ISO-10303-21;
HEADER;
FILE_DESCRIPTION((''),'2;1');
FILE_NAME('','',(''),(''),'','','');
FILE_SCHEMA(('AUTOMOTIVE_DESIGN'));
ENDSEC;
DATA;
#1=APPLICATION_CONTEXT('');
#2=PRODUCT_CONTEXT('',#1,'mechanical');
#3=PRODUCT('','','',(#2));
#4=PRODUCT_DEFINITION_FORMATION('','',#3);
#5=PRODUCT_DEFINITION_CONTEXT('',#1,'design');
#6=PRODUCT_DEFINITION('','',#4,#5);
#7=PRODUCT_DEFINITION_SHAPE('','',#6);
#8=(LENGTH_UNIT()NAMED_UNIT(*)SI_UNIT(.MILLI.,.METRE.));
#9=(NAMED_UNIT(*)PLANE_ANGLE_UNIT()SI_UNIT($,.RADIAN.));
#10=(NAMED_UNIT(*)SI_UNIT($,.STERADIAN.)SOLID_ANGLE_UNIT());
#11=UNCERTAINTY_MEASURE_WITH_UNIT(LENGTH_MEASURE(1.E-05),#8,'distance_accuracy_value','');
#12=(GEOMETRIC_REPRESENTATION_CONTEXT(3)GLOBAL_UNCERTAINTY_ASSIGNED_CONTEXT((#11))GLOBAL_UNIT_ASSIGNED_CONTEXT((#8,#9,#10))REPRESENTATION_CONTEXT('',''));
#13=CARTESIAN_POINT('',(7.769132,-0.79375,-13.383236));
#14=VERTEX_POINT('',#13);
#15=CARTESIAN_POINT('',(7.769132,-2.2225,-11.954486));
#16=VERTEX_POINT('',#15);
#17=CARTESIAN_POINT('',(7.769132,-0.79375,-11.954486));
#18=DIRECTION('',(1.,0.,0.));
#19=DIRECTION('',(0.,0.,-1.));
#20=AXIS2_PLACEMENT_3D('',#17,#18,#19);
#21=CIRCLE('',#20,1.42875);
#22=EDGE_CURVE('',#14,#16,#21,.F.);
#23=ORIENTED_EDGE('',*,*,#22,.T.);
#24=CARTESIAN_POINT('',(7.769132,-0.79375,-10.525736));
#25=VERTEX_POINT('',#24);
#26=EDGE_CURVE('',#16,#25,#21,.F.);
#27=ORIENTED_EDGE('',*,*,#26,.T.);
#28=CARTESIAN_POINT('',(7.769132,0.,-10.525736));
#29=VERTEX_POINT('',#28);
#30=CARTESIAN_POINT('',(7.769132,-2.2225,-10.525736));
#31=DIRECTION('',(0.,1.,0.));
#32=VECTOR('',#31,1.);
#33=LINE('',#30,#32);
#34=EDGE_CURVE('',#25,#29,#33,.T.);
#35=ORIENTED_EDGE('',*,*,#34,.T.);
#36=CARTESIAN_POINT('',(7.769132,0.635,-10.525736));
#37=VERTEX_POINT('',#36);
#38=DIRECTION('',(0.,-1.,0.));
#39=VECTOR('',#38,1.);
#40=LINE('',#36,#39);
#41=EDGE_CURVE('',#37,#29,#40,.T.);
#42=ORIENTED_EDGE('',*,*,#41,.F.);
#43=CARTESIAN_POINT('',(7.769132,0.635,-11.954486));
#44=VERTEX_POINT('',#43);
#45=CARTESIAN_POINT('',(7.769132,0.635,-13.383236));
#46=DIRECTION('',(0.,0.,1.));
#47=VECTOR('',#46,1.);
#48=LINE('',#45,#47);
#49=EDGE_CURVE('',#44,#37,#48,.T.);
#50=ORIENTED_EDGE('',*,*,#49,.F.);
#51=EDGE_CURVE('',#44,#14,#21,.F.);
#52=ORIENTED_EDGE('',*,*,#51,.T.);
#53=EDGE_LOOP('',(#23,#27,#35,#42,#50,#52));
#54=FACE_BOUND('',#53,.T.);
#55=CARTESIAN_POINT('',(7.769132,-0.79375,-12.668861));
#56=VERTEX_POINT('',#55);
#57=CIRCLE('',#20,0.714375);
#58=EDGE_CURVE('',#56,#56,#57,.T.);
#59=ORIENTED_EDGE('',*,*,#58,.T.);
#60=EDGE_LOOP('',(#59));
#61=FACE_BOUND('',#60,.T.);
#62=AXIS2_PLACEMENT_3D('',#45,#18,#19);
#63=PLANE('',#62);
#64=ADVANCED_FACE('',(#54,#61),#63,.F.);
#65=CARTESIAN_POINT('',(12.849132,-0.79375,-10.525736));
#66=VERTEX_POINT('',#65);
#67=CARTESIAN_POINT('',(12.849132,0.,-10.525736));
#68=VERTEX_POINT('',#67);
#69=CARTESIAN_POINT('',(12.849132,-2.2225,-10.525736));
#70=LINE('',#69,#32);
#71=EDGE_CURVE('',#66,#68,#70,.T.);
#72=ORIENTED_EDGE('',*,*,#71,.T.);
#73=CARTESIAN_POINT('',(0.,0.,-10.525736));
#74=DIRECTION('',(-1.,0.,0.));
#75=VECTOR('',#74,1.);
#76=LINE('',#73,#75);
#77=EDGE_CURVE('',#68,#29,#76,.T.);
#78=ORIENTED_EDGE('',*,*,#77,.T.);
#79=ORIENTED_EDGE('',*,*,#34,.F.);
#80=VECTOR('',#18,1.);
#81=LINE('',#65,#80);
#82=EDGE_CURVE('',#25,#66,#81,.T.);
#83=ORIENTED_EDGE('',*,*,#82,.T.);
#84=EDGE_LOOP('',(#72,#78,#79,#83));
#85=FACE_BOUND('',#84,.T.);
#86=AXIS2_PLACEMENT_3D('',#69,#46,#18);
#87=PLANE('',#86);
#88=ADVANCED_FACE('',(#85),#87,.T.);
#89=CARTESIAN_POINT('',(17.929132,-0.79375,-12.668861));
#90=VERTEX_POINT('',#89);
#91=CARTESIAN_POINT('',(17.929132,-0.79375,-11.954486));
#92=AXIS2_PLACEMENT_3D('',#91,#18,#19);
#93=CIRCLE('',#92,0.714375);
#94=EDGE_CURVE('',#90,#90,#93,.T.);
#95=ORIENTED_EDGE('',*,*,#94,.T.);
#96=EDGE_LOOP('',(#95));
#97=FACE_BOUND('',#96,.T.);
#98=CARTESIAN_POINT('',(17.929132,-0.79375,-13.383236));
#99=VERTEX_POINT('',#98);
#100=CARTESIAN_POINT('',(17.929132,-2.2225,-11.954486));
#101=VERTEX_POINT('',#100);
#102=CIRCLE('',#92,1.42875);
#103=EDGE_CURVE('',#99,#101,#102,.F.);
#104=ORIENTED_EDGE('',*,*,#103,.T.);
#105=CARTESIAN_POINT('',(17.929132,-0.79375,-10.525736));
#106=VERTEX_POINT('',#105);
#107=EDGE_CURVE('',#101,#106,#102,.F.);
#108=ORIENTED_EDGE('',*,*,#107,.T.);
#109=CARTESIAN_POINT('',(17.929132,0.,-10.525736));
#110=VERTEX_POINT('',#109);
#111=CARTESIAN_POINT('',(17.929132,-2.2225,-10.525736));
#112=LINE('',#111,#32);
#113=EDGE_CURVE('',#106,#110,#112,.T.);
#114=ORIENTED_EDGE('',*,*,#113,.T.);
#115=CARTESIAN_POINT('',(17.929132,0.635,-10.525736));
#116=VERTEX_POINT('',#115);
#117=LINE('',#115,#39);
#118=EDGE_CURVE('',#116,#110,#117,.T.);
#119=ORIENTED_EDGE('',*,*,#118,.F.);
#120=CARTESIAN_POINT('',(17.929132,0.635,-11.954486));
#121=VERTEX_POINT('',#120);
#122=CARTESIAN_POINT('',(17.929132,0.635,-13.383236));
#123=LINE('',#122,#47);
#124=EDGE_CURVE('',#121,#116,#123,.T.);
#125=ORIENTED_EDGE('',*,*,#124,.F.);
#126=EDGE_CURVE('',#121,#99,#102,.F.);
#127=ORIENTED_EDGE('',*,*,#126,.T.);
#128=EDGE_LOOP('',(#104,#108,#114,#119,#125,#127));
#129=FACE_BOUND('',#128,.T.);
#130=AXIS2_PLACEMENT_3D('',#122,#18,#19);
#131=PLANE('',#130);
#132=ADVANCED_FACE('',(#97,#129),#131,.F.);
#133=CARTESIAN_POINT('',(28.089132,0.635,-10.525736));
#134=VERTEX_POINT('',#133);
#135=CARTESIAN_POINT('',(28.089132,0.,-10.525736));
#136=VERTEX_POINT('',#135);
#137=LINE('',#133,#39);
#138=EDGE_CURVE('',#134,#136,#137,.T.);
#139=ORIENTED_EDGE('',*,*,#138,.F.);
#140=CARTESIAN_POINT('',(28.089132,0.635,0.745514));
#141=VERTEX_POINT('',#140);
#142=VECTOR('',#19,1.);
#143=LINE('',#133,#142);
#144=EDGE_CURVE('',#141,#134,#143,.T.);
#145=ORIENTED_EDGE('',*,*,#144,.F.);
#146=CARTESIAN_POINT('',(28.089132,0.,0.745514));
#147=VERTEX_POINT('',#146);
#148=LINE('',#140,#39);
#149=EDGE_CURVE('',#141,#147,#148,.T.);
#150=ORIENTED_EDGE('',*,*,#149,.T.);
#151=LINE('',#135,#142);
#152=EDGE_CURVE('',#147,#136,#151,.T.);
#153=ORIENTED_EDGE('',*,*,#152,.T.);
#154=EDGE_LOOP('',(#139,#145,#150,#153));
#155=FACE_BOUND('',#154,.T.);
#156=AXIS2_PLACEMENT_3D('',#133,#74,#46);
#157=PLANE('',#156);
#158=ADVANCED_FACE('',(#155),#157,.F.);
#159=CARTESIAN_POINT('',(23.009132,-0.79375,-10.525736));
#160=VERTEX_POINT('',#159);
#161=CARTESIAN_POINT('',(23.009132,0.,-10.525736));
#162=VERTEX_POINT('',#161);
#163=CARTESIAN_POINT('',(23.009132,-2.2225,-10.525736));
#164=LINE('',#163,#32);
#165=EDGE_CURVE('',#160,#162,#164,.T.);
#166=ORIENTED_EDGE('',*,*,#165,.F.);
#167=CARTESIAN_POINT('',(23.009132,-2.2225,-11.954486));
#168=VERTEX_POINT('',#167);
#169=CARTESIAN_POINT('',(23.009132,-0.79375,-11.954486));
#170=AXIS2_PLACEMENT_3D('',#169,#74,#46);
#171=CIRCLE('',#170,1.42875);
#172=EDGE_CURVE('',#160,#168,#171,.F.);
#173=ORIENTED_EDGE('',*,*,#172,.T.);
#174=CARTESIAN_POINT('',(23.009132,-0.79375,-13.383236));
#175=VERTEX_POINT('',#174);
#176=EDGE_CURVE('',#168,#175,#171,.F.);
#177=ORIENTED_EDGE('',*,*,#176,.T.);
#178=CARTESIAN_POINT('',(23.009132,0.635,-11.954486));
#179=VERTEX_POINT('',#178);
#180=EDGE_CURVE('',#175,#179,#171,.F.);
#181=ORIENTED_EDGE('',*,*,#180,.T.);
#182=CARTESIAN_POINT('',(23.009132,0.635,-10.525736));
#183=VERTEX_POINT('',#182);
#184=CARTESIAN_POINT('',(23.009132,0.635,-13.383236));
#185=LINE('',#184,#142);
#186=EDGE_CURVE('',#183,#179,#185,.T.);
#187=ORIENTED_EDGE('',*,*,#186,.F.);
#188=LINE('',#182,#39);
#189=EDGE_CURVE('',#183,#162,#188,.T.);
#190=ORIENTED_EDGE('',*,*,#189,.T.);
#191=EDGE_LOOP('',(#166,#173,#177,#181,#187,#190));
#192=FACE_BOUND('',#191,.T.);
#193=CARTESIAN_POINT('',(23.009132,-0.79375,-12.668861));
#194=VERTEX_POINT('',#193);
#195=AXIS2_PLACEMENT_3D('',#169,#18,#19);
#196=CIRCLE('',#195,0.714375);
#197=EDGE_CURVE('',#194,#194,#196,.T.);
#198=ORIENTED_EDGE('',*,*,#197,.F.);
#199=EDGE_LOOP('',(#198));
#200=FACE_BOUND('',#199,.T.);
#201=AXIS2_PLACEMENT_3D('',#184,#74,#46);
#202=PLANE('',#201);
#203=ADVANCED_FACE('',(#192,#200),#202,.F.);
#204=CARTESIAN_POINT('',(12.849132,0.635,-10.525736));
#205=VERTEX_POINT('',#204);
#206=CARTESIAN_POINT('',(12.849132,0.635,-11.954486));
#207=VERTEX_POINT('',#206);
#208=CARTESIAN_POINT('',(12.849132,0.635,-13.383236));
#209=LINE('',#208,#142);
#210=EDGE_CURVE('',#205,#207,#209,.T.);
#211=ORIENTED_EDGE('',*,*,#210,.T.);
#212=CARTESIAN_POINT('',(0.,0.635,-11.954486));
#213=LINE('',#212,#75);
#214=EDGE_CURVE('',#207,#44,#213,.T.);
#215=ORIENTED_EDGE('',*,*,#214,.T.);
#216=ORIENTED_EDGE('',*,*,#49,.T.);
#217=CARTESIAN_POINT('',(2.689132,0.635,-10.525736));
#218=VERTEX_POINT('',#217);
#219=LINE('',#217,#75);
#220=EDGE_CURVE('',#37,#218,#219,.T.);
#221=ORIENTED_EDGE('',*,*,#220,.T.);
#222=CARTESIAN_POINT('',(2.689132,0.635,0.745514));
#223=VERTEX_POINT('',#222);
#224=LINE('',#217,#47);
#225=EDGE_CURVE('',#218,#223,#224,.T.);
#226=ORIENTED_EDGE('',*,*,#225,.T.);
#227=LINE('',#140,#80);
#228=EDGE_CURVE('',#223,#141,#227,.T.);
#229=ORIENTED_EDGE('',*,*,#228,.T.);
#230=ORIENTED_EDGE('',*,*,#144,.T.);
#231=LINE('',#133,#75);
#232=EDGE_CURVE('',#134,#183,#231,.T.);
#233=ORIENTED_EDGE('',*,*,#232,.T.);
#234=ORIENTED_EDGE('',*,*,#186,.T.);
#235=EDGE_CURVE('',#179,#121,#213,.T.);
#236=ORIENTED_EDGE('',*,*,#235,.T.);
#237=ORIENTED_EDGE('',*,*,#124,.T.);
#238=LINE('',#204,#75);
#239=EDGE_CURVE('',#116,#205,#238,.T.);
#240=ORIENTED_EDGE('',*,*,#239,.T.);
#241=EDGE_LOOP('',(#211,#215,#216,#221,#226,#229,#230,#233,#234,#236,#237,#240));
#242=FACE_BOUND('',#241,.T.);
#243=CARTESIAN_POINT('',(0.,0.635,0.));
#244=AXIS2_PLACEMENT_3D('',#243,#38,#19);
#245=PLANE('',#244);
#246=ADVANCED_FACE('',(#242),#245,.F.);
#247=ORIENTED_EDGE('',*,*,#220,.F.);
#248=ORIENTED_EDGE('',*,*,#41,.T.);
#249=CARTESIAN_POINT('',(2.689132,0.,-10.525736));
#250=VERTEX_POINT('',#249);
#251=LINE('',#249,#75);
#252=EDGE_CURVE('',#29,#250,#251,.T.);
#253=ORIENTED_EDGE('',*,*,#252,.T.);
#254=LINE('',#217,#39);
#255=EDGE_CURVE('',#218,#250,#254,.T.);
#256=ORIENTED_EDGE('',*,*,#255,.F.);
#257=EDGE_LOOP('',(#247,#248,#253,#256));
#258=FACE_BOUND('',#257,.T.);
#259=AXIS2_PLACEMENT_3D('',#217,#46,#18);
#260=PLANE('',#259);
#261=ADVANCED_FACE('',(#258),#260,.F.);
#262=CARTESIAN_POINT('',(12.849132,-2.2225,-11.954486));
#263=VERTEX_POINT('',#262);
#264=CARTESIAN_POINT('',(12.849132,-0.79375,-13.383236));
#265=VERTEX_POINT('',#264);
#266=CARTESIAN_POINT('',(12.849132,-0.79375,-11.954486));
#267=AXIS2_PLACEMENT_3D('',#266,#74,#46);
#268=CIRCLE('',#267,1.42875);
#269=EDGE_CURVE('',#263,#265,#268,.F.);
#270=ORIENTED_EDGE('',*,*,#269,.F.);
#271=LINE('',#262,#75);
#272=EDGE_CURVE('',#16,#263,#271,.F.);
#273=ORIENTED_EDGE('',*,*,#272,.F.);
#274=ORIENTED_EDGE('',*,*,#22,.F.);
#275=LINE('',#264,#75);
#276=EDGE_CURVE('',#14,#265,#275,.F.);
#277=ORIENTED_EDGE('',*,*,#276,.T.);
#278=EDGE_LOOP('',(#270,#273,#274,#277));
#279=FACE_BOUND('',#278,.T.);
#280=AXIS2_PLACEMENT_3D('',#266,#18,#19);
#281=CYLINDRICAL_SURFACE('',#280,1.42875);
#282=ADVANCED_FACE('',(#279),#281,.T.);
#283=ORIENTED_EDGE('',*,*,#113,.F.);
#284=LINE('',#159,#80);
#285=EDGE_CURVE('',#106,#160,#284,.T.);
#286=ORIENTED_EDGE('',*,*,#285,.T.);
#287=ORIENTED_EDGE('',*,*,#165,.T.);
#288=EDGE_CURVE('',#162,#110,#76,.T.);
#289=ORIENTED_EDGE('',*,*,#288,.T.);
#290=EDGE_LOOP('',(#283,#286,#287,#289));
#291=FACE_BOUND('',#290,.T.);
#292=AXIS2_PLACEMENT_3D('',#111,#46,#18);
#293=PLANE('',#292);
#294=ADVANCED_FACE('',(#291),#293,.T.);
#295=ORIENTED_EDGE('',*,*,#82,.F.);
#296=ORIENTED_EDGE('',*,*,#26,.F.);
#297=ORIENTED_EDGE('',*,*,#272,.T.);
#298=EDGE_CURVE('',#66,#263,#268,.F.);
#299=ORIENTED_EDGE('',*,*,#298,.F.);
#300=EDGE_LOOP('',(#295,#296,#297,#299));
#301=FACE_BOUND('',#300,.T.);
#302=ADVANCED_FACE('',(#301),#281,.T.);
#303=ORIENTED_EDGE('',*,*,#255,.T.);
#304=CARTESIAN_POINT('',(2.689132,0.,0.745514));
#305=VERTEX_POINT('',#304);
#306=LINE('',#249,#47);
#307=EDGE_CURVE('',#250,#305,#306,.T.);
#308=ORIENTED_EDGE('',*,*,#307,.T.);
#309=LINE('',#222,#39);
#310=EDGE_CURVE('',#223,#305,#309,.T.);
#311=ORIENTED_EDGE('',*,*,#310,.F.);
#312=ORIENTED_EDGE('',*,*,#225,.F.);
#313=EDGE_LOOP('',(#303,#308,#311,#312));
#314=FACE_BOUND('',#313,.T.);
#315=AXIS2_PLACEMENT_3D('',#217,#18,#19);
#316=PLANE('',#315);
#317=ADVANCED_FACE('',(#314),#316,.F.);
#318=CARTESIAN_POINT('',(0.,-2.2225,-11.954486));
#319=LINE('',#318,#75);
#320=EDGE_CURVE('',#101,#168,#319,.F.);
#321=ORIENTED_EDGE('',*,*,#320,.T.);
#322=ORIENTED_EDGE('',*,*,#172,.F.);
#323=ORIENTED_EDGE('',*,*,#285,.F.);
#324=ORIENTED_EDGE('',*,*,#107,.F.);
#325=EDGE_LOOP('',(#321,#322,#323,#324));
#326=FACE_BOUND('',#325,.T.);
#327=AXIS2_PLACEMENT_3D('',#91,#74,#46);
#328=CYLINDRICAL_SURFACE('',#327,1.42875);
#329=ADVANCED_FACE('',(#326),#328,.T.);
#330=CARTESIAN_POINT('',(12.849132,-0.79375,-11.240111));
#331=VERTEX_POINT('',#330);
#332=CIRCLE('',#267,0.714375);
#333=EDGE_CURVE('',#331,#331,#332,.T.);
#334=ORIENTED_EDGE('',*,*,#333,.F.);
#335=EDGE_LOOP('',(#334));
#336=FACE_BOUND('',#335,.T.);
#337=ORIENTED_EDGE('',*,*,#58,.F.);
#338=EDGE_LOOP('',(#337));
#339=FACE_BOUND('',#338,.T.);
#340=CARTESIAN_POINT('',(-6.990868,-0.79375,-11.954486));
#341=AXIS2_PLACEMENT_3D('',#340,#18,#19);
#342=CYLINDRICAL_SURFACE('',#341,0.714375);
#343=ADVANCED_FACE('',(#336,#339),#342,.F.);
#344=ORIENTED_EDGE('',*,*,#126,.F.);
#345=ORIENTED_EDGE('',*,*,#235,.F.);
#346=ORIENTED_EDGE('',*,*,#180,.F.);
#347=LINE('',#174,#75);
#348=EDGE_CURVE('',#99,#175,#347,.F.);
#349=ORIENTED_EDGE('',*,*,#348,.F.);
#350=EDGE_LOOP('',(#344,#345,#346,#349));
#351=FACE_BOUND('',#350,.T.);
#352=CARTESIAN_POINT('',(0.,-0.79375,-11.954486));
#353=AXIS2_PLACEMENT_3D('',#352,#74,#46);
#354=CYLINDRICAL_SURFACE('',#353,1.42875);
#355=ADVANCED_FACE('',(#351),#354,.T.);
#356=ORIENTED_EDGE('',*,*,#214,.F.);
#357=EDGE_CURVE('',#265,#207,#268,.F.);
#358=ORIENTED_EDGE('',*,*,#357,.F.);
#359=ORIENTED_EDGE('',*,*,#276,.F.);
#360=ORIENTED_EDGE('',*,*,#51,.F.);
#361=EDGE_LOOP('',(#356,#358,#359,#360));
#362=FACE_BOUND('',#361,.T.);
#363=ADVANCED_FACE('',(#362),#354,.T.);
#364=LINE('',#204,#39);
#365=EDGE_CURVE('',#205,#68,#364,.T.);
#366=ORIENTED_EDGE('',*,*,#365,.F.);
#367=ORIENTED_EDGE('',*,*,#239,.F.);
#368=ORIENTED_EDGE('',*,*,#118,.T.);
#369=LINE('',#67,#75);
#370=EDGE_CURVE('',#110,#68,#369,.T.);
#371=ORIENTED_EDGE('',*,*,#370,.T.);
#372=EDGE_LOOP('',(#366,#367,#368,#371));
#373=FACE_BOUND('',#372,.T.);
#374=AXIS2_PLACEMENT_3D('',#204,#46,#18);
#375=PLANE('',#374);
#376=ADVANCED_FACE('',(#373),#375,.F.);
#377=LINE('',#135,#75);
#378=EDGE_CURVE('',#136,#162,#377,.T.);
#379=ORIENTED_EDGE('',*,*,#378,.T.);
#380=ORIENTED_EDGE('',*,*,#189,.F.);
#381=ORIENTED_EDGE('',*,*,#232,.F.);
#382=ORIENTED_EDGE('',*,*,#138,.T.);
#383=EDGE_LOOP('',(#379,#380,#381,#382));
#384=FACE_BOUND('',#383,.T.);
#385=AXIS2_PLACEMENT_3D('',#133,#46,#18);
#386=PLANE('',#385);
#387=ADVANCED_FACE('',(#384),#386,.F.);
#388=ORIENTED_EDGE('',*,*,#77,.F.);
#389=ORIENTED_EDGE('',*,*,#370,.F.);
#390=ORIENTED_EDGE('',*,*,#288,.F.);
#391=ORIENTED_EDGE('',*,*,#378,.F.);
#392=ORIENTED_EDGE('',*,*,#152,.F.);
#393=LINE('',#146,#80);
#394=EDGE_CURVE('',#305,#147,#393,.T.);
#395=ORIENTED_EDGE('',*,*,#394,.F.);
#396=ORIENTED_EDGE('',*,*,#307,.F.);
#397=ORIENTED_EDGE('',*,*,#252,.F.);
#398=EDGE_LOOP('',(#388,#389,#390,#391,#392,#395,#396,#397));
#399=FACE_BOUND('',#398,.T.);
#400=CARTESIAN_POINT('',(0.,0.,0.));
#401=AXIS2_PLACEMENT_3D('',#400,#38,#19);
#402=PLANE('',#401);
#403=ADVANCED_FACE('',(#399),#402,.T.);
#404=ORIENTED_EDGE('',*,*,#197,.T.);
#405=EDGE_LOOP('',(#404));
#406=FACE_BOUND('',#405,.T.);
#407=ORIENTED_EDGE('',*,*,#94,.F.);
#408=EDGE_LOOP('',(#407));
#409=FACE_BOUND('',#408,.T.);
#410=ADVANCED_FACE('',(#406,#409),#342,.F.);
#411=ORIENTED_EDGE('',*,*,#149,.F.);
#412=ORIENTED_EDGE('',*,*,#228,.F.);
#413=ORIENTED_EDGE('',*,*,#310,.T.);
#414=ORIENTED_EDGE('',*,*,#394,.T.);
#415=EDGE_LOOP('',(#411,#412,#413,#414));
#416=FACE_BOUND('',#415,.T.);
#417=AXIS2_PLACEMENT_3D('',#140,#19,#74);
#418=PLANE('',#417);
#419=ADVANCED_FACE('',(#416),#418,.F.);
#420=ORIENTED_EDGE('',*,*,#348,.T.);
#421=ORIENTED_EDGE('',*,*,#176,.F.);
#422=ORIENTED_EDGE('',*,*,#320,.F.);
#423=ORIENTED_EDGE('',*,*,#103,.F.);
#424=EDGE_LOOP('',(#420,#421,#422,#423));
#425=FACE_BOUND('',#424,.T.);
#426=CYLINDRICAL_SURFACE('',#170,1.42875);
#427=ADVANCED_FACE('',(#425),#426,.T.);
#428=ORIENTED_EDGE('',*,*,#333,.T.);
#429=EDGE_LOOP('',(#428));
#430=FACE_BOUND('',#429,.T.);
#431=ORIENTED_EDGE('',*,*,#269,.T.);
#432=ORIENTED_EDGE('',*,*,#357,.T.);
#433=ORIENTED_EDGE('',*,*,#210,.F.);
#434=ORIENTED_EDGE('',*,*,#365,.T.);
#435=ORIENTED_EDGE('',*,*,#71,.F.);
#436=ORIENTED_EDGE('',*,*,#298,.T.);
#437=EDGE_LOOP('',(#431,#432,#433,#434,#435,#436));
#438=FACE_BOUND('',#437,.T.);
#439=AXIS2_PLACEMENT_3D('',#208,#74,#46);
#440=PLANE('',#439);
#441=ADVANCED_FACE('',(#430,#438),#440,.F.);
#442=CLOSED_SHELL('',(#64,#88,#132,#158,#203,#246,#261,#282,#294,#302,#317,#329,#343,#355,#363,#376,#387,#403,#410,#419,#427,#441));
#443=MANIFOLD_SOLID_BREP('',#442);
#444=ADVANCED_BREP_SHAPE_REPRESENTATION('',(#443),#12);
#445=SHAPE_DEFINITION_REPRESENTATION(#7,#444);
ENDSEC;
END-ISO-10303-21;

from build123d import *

# Parameters (mm, degrees)
BOSS_EXTRUDE1_DEPTH = 0.635
SKETCH2_W           = 5.08
SKETCH2_H           = 2.8575
BOSS_EXTRUDE2_DEPTH = 2.8575
FILLET1_R           = 1.42875
SKETCH3_R           = 0.714375
CUT_EXTRUDE1_DEPTH  = 30


with BuildPart() as part:
    # Sketch1 → Boss-Extrude1 (new body)
    with BuildSketch(Plane(origin=(0, 0, 0), x_dir=(1, 0, 0), z_dir=(0, 1, 0))):
        Polygon((12.849131833, 13.383236071), (7.769131833, 13.383236071), (7.769131833, 10.525736071), (2.689131833, 10.525736071), (2.689131833, -0.745513929), (28.089131833, -0.745513929), (28.089131833, 10.525736071), (23.009131833, 10.525736071), (23.009131833, 13.383236071), (17.929131833, 13.383236071), (17.929131833, 10.525736071), (12.849131833, 10.525736071), align=None)
    extrude(amount=BOSS_EXTRUDE1_DEPTH)

    # Sketch2 → Boss-Extrude2 (add)
    with BuildSketch(Plane(origin=(0, 0.635, 0), x_dir=(1, 0, 0), z_dir=(0, 1, 0))):
        with Locations((10.309131833, 11.954486071)):
            Rectangle(SKETCH2_W, SKETCH2_H)
        with Locations((20.469131833, 11.954486071)):
            Rectangle(SKETCH2_W, SKETCH2_H)
    extrude(amount=-BOSS_EXTRUDE2_DEPTH)

    # Fillet1
    fillet1_edges = [part.edges().sort_by_distance(p)[0] for p in [
        (10.309131833, -2.2225, -10.525736071),
        (20.469131833, -2.2225, -10.525736071),
        (20.469131833, -2.2225, -13.383236071),
        (10.309131833, -2.2225, -13.383236071),
        (10.309131833, 0.635, -13.383236071),
        (20.469131833, 0.635, -13.383236071),
    ]]
    fillet(fillet1_edges, radius=FILLET1_R - 0.0001)  # a hair under: the kernel refuses the full size

    # Sketch3 → Cut-Extrude1 (cut)
    with BuildSketch(Plane(origin=(23.009131833, 0, 0), x_dir=(0, 0, -1), z_dir=(1, 0, 0))):
        with Locations((11.954486071, -0.79375)):
            Circle(SKETCH3_R)
    extrude(amount=-CUT_EXTRUDE1_DEPTH, mode=Mode.SUBTRACT)


solid = part.part
